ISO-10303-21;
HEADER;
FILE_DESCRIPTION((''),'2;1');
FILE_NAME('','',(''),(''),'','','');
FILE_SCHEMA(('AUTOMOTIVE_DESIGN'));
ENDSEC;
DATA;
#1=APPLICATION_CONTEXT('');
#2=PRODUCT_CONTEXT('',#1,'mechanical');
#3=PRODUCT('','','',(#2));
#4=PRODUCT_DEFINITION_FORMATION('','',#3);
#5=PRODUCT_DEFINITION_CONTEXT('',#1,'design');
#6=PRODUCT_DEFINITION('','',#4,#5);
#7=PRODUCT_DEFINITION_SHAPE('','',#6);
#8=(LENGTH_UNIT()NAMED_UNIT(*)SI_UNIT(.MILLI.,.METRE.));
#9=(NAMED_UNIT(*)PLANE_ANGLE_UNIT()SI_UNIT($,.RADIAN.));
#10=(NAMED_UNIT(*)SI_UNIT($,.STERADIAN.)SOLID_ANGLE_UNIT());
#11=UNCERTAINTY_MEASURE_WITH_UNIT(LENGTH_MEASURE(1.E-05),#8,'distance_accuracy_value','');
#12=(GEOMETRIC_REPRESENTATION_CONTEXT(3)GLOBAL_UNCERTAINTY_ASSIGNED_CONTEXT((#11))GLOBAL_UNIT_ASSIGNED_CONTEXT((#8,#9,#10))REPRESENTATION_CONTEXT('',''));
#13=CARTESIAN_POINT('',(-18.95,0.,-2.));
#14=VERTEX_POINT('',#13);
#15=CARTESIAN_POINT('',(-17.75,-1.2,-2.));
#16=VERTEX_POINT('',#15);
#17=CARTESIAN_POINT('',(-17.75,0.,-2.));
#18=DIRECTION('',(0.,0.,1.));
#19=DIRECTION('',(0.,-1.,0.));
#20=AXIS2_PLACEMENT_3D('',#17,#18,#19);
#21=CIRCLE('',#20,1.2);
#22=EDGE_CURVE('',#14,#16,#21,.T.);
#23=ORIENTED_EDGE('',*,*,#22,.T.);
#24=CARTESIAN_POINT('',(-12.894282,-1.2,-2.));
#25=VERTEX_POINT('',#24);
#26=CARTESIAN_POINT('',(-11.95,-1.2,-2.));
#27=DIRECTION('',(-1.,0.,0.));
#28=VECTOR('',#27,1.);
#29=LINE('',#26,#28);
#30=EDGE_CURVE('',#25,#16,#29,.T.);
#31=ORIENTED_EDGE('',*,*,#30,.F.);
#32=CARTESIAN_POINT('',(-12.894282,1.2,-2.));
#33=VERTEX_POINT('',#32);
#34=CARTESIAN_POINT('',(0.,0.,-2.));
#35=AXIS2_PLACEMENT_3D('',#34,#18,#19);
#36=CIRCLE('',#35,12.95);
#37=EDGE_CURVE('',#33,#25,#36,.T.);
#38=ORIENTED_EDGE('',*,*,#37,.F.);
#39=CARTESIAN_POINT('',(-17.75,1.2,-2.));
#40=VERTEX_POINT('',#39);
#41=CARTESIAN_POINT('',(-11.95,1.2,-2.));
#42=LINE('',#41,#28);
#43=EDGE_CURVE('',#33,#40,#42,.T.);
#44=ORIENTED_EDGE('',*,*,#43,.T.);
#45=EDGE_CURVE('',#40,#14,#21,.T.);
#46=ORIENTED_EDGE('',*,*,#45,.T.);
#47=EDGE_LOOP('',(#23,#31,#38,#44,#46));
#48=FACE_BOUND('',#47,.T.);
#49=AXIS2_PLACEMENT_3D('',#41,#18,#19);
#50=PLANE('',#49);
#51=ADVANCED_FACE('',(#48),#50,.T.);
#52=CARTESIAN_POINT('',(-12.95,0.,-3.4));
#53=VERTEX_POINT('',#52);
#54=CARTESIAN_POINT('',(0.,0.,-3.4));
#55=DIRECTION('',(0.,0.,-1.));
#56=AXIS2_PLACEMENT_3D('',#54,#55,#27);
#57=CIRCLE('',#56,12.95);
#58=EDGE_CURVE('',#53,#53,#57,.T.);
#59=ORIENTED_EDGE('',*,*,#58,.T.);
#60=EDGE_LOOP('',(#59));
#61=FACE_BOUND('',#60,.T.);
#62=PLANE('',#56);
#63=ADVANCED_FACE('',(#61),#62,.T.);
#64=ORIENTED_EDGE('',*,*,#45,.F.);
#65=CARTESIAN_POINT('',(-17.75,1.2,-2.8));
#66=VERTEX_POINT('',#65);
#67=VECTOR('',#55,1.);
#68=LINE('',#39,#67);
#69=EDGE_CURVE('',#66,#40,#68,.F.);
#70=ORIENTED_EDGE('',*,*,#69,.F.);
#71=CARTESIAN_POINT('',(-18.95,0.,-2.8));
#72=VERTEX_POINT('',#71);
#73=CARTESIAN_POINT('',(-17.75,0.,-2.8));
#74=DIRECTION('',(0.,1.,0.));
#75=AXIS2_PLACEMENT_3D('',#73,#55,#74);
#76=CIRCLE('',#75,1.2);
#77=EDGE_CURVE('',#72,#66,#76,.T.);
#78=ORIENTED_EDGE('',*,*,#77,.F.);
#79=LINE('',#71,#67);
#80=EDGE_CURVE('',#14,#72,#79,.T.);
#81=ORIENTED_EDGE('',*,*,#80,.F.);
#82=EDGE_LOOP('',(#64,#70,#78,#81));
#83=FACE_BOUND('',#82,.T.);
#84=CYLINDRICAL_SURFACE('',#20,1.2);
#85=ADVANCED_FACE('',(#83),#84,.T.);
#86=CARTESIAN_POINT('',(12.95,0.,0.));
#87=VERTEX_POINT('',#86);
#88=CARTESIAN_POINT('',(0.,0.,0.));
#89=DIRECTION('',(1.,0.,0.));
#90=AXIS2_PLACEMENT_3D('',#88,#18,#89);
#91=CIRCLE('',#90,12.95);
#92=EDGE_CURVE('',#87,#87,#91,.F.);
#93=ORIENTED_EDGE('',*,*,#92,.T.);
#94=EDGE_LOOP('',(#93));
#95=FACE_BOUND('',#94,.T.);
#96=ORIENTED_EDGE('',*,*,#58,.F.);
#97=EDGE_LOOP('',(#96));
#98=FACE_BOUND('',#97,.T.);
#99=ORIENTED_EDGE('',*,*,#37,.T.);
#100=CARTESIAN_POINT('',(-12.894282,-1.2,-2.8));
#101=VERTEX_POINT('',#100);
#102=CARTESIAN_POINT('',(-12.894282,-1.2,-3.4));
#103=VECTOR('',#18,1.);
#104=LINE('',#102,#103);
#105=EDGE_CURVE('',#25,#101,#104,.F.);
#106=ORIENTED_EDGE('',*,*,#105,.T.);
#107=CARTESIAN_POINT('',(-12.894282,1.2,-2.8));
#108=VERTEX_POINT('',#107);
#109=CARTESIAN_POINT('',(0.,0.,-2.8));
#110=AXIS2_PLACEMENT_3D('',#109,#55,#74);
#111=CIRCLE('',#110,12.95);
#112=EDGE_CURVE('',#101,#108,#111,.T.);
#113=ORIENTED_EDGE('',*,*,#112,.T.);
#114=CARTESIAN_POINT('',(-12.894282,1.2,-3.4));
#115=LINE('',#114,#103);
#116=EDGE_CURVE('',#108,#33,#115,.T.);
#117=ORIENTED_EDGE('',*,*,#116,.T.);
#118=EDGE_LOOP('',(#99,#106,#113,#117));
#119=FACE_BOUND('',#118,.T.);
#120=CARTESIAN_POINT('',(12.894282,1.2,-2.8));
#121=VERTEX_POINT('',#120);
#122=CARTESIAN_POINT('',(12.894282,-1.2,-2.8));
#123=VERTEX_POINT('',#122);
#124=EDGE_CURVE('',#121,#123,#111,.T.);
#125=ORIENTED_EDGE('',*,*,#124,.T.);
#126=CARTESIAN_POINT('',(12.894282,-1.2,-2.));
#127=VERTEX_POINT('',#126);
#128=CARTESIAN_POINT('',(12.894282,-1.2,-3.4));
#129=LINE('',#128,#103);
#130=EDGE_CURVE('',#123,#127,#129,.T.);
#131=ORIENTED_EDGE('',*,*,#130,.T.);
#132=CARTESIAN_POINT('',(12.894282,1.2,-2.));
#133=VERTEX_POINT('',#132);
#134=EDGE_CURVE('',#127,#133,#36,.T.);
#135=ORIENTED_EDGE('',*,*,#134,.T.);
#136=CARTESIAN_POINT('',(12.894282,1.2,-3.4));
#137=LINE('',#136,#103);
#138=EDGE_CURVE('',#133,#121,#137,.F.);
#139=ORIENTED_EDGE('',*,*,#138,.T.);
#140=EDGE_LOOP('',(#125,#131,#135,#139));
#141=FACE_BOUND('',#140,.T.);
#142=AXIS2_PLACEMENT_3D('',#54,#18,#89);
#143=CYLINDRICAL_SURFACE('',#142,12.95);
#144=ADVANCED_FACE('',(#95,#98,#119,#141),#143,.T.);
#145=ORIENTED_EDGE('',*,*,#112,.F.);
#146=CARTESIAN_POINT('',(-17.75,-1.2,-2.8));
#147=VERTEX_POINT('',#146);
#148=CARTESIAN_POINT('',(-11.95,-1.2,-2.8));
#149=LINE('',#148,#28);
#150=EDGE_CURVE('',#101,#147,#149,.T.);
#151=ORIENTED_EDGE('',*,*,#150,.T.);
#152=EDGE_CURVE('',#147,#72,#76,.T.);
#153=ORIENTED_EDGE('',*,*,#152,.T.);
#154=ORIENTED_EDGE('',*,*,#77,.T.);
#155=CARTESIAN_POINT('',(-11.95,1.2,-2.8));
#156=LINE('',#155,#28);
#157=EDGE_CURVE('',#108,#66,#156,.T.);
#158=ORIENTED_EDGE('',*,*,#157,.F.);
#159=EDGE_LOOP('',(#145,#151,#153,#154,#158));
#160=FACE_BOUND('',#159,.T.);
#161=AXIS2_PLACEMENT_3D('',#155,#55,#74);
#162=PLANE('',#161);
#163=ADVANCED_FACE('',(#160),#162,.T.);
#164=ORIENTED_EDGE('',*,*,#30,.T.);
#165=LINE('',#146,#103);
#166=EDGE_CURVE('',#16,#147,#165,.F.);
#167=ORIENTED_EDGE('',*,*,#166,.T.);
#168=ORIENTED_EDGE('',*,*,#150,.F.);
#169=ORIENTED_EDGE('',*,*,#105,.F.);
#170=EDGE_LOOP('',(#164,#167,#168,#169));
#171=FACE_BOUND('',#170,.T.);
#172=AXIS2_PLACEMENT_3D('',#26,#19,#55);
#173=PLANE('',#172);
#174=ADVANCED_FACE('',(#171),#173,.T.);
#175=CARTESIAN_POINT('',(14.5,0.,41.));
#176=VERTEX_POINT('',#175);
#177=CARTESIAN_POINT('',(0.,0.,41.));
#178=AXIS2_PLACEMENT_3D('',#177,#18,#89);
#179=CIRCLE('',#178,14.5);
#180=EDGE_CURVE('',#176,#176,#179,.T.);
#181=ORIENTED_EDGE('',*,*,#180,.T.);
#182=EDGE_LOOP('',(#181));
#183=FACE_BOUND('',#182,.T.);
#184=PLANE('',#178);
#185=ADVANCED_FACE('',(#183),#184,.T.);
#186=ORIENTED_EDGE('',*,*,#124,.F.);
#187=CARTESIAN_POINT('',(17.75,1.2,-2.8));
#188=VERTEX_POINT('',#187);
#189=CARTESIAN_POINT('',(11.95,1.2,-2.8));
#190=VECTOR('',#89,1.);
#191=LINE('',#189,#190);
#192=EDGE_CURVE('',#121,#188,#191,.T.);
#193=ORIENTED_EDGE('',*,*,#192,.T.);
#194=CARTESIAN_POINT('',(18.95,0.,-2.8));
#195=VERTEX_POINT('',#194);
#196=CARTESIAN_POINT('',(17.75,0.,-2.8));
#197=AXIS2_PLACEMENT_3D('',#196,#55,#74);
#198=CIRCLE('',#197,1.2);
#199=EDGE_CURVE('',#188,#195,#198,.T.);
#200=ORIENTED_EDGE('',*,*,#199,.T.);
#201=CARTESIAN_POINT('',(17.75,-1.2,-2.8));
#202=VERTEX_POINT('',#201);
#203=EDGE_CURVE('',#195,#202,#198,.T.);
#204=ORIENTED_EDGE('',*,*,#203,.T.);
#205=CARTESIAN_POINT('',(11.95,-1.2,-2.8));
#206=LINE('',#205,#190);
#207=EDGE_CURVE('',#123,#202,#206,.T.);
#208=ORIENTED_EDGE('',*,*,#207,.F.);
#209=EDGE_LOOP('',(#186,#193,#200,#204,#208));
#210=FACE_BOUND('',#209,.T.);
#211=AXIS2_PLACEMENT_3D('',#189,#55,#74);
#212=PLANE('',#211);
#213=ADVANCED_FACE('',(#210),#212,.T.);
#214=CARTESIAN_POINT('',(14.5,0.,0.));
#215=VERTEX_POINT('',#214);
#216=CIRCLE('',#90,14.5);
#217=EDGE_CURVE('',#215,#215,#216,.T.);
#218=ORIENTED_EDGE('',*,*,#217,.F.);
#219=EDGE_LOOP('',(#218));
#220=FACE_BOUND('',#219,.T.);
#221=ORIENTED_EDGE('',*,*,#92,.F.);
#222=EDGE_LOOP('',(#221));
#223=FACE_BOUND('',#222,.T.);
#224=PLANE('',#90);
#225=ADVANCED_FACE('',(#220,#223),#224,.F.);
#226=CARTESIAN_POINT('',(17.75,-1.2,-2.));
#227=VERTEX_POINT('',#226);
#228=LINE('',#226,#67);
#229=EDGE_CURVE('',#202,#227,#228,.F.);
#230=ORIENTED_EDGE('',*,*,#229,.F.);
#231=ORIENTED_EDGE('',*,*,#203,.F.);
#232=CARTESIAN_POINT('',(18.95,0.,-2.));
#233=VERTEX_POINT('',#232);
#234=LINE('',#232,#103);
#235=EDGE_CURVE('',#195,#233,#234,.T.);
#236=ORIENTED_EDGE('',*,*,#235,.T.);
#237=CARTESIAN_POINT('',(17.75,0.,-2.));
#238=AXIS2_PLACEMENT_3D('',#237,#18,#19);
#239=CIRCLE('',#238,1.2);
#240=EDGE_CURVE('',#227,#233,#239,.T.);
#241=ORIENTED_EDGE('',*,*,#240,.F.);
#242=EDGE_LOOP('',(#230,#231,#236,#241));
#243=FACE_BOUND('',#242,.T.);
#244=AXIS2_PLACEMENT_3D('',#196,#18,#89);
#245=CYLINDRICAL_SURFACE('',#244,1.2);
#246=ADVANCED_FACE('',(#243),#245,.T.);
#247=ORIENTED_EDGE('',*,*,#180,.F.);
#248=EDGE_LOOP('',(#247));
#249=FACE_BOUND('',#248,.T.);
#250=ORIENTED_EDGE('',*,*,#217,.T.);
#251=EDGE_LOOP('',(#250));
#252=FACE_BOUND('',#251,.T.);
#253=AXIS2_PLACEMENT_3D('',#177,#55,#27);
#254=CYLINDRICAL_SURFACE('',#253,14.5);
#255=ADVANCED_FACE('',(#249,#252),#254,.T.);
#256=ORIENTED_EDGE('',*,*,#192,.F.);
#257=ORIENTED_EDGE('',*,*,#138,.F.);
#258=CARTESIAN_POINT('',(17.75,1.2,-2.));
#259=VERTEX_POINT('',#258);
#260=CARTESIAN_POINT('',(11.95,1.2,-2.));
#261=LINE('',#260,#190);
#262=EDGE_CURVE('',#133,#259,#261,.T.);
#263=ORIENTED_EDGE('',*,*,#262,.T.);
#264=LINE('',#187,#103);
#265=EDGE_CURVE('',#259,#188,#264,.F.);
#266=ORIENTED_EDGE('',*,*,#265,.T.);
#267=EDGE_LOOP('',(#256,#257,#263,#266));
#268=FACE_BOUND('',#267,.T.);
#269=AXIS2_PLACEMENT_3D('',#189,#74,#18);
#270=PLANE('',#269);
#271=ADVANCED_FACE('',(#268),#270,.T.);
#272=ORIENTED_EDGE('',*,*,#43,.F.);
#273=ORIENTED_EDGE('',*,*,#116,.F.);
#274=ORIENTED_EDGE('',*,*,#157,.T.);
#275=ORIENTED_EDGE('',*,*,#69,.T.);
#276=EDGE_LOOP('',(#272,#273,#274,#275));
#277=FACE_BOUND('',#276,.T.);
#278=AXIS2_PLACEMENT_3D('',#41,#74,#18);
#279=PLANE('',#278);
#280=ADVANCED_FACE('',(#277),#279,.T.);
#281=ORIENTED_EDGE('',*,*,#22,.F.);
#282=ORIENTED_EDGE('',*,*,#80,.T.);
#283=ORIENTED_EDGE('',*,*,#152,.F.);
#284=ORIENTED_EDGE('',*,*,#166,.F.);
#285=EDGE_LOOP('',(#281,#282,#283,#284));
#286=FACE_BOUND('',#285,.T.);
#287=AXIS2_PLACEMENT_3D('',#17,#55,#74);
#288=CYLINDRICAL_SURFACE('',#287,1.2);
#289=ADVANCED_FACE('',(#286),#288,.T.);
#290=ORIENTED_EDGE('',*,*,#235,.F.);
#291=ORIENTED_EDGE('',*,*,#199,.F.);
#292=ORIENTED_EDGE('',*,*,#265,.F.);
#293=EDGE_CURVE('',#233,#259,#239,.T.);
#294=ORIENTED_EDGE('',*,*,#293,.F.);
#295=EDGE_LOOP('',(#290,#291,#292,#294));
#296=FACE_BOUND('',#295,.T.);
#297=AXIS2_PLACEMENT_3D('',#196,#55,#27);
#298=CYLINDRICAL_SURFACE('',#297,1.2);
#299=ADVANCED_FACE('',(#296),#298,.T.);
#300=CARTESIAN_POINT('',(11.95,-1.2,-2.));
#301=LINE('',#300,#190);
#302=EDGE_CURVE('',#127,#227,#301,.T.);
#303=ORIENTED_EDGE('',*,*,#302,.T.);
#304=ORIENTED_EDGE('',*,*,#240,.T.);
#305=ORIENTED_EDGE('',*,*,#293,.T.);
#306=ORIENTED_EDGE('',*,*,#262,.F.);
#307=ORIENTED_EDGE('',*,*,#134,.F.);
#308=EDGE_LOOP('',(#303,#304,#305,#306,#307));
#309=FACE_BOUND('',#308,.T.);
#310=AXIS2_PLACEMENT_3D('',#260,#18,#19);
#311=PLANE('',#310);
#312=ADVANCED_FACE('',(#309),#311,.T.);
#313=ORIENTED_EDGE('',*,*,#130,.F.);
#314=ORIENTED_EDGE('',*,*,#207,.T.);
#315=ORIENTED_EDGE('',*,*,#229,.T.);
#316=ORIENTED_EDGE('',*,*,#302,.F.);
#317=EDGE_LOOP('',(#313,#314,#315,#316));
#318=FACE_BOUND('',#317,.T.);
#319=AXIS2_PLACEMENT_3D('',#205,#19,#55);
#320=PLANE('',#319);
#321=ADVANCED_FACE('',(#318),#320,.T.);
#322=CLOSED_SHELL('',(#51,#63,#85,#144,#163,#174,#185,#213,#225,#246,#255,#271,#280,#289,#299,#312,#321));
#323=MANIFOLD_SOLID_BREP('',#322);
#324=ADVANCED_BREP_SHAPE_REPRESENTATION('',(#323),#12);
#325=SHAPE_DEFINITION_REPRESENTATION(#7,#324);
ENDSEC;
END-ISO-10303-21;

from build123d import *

# Parameters (mm, degrees)
ESQUISSE1_R             = 14.5
BOSS_EXTRU_1_DEPTH      = 41
ESQUISSE2_R             = 12.95
BOSS_EXTRU_2_DEPTH      = 3.4
BOSS_EXTRU_3_DEPTH      = 6
BOSS_EXTRU_3_DEPTH_BACK = 1
ESQUISSE3_W             = 0.8
ESQUISSE3_H             = 2.4
BOSS_EXTRU_4_DEPTH      = 6
BOSS_EXTRU_4_DEPTH_BACK = 1
ESQUISSE4_W             = 0.8
ESQUISSE4_H             = 2.4
CONG_1_R                = 1.2


with BuildPart() as part:
    # Esquisse1 → Boss.-Extru.1 (new body)
    with BuildSketch(Plane.XY):
        Circle(ESQUISSE1_R)
    extrude(amount=BOSS_EXTRU_1_DEPTH)

    # Esquisse2 → Boss.-Extru.2 (add)
    with BuildSketch(Plane(origin=(0, 0, 0), x_dir=(-1, 0, 0), z_dir=(0, 0, -1))):
        with Locations(Location((0, 0, 0), (0, 0, 180))):
            Circle(ESQUISSE2_R)
    extrude(amount=BOSS_EXTRU_2_DEPTH)

    # Esquisse3 → Boss.-Extru.3 (add, two sides: drawn at the far end of the back side and taken through both)
    with BuildSketch(Plane(origin=(12.95, 0, 0), x_dir=(0, 0, -1), z_dir=(1, 0, 0)).offset(-BOSS_EXTRU_3_DEPTH_BACK)):
        with Locations((2.4, 0)):
            Rectangle(ESQUISSE3_W, ESQUISSE3_H)
    extrude(amount=BOSS_EXTRU_3_DEPTH + BOSS_EXTRU_3_DEPTH_BACK)

    # Esquisse4 → Boss.-Extru.4 (add, two sides: drawn at the far end of the back side and taken through both)
    with BuildSketch(Plane.ZY.offset(12.95).offset(-BOSS_EXTRU_4_DEPTH_BACK)):
        with Locations((-2.4, 0)):
            Rectangle(ESQUISSE4_W, ESQUISSE4_H)
    extrude(amount=BOSS_EXTRU_4_DEPTH + BOSS_EXTRU_4_DEPTH_BACK)

    # Congé1
    cong_1_edges = [part.edges().sort_by_distance(p)[0] for p in [
        (18.95, -1.2, -2.4),
        (18.95, 1.2, -2.4),
        (-18.95, -1.2, -2.4),
        (-18.95, 1.2, -2.4),
    ]]
    fillet(cong_1_edges, radius=CONG_1_R - 0.0001)  # a hair under: the kernel refuses the full size


solid = part.part
